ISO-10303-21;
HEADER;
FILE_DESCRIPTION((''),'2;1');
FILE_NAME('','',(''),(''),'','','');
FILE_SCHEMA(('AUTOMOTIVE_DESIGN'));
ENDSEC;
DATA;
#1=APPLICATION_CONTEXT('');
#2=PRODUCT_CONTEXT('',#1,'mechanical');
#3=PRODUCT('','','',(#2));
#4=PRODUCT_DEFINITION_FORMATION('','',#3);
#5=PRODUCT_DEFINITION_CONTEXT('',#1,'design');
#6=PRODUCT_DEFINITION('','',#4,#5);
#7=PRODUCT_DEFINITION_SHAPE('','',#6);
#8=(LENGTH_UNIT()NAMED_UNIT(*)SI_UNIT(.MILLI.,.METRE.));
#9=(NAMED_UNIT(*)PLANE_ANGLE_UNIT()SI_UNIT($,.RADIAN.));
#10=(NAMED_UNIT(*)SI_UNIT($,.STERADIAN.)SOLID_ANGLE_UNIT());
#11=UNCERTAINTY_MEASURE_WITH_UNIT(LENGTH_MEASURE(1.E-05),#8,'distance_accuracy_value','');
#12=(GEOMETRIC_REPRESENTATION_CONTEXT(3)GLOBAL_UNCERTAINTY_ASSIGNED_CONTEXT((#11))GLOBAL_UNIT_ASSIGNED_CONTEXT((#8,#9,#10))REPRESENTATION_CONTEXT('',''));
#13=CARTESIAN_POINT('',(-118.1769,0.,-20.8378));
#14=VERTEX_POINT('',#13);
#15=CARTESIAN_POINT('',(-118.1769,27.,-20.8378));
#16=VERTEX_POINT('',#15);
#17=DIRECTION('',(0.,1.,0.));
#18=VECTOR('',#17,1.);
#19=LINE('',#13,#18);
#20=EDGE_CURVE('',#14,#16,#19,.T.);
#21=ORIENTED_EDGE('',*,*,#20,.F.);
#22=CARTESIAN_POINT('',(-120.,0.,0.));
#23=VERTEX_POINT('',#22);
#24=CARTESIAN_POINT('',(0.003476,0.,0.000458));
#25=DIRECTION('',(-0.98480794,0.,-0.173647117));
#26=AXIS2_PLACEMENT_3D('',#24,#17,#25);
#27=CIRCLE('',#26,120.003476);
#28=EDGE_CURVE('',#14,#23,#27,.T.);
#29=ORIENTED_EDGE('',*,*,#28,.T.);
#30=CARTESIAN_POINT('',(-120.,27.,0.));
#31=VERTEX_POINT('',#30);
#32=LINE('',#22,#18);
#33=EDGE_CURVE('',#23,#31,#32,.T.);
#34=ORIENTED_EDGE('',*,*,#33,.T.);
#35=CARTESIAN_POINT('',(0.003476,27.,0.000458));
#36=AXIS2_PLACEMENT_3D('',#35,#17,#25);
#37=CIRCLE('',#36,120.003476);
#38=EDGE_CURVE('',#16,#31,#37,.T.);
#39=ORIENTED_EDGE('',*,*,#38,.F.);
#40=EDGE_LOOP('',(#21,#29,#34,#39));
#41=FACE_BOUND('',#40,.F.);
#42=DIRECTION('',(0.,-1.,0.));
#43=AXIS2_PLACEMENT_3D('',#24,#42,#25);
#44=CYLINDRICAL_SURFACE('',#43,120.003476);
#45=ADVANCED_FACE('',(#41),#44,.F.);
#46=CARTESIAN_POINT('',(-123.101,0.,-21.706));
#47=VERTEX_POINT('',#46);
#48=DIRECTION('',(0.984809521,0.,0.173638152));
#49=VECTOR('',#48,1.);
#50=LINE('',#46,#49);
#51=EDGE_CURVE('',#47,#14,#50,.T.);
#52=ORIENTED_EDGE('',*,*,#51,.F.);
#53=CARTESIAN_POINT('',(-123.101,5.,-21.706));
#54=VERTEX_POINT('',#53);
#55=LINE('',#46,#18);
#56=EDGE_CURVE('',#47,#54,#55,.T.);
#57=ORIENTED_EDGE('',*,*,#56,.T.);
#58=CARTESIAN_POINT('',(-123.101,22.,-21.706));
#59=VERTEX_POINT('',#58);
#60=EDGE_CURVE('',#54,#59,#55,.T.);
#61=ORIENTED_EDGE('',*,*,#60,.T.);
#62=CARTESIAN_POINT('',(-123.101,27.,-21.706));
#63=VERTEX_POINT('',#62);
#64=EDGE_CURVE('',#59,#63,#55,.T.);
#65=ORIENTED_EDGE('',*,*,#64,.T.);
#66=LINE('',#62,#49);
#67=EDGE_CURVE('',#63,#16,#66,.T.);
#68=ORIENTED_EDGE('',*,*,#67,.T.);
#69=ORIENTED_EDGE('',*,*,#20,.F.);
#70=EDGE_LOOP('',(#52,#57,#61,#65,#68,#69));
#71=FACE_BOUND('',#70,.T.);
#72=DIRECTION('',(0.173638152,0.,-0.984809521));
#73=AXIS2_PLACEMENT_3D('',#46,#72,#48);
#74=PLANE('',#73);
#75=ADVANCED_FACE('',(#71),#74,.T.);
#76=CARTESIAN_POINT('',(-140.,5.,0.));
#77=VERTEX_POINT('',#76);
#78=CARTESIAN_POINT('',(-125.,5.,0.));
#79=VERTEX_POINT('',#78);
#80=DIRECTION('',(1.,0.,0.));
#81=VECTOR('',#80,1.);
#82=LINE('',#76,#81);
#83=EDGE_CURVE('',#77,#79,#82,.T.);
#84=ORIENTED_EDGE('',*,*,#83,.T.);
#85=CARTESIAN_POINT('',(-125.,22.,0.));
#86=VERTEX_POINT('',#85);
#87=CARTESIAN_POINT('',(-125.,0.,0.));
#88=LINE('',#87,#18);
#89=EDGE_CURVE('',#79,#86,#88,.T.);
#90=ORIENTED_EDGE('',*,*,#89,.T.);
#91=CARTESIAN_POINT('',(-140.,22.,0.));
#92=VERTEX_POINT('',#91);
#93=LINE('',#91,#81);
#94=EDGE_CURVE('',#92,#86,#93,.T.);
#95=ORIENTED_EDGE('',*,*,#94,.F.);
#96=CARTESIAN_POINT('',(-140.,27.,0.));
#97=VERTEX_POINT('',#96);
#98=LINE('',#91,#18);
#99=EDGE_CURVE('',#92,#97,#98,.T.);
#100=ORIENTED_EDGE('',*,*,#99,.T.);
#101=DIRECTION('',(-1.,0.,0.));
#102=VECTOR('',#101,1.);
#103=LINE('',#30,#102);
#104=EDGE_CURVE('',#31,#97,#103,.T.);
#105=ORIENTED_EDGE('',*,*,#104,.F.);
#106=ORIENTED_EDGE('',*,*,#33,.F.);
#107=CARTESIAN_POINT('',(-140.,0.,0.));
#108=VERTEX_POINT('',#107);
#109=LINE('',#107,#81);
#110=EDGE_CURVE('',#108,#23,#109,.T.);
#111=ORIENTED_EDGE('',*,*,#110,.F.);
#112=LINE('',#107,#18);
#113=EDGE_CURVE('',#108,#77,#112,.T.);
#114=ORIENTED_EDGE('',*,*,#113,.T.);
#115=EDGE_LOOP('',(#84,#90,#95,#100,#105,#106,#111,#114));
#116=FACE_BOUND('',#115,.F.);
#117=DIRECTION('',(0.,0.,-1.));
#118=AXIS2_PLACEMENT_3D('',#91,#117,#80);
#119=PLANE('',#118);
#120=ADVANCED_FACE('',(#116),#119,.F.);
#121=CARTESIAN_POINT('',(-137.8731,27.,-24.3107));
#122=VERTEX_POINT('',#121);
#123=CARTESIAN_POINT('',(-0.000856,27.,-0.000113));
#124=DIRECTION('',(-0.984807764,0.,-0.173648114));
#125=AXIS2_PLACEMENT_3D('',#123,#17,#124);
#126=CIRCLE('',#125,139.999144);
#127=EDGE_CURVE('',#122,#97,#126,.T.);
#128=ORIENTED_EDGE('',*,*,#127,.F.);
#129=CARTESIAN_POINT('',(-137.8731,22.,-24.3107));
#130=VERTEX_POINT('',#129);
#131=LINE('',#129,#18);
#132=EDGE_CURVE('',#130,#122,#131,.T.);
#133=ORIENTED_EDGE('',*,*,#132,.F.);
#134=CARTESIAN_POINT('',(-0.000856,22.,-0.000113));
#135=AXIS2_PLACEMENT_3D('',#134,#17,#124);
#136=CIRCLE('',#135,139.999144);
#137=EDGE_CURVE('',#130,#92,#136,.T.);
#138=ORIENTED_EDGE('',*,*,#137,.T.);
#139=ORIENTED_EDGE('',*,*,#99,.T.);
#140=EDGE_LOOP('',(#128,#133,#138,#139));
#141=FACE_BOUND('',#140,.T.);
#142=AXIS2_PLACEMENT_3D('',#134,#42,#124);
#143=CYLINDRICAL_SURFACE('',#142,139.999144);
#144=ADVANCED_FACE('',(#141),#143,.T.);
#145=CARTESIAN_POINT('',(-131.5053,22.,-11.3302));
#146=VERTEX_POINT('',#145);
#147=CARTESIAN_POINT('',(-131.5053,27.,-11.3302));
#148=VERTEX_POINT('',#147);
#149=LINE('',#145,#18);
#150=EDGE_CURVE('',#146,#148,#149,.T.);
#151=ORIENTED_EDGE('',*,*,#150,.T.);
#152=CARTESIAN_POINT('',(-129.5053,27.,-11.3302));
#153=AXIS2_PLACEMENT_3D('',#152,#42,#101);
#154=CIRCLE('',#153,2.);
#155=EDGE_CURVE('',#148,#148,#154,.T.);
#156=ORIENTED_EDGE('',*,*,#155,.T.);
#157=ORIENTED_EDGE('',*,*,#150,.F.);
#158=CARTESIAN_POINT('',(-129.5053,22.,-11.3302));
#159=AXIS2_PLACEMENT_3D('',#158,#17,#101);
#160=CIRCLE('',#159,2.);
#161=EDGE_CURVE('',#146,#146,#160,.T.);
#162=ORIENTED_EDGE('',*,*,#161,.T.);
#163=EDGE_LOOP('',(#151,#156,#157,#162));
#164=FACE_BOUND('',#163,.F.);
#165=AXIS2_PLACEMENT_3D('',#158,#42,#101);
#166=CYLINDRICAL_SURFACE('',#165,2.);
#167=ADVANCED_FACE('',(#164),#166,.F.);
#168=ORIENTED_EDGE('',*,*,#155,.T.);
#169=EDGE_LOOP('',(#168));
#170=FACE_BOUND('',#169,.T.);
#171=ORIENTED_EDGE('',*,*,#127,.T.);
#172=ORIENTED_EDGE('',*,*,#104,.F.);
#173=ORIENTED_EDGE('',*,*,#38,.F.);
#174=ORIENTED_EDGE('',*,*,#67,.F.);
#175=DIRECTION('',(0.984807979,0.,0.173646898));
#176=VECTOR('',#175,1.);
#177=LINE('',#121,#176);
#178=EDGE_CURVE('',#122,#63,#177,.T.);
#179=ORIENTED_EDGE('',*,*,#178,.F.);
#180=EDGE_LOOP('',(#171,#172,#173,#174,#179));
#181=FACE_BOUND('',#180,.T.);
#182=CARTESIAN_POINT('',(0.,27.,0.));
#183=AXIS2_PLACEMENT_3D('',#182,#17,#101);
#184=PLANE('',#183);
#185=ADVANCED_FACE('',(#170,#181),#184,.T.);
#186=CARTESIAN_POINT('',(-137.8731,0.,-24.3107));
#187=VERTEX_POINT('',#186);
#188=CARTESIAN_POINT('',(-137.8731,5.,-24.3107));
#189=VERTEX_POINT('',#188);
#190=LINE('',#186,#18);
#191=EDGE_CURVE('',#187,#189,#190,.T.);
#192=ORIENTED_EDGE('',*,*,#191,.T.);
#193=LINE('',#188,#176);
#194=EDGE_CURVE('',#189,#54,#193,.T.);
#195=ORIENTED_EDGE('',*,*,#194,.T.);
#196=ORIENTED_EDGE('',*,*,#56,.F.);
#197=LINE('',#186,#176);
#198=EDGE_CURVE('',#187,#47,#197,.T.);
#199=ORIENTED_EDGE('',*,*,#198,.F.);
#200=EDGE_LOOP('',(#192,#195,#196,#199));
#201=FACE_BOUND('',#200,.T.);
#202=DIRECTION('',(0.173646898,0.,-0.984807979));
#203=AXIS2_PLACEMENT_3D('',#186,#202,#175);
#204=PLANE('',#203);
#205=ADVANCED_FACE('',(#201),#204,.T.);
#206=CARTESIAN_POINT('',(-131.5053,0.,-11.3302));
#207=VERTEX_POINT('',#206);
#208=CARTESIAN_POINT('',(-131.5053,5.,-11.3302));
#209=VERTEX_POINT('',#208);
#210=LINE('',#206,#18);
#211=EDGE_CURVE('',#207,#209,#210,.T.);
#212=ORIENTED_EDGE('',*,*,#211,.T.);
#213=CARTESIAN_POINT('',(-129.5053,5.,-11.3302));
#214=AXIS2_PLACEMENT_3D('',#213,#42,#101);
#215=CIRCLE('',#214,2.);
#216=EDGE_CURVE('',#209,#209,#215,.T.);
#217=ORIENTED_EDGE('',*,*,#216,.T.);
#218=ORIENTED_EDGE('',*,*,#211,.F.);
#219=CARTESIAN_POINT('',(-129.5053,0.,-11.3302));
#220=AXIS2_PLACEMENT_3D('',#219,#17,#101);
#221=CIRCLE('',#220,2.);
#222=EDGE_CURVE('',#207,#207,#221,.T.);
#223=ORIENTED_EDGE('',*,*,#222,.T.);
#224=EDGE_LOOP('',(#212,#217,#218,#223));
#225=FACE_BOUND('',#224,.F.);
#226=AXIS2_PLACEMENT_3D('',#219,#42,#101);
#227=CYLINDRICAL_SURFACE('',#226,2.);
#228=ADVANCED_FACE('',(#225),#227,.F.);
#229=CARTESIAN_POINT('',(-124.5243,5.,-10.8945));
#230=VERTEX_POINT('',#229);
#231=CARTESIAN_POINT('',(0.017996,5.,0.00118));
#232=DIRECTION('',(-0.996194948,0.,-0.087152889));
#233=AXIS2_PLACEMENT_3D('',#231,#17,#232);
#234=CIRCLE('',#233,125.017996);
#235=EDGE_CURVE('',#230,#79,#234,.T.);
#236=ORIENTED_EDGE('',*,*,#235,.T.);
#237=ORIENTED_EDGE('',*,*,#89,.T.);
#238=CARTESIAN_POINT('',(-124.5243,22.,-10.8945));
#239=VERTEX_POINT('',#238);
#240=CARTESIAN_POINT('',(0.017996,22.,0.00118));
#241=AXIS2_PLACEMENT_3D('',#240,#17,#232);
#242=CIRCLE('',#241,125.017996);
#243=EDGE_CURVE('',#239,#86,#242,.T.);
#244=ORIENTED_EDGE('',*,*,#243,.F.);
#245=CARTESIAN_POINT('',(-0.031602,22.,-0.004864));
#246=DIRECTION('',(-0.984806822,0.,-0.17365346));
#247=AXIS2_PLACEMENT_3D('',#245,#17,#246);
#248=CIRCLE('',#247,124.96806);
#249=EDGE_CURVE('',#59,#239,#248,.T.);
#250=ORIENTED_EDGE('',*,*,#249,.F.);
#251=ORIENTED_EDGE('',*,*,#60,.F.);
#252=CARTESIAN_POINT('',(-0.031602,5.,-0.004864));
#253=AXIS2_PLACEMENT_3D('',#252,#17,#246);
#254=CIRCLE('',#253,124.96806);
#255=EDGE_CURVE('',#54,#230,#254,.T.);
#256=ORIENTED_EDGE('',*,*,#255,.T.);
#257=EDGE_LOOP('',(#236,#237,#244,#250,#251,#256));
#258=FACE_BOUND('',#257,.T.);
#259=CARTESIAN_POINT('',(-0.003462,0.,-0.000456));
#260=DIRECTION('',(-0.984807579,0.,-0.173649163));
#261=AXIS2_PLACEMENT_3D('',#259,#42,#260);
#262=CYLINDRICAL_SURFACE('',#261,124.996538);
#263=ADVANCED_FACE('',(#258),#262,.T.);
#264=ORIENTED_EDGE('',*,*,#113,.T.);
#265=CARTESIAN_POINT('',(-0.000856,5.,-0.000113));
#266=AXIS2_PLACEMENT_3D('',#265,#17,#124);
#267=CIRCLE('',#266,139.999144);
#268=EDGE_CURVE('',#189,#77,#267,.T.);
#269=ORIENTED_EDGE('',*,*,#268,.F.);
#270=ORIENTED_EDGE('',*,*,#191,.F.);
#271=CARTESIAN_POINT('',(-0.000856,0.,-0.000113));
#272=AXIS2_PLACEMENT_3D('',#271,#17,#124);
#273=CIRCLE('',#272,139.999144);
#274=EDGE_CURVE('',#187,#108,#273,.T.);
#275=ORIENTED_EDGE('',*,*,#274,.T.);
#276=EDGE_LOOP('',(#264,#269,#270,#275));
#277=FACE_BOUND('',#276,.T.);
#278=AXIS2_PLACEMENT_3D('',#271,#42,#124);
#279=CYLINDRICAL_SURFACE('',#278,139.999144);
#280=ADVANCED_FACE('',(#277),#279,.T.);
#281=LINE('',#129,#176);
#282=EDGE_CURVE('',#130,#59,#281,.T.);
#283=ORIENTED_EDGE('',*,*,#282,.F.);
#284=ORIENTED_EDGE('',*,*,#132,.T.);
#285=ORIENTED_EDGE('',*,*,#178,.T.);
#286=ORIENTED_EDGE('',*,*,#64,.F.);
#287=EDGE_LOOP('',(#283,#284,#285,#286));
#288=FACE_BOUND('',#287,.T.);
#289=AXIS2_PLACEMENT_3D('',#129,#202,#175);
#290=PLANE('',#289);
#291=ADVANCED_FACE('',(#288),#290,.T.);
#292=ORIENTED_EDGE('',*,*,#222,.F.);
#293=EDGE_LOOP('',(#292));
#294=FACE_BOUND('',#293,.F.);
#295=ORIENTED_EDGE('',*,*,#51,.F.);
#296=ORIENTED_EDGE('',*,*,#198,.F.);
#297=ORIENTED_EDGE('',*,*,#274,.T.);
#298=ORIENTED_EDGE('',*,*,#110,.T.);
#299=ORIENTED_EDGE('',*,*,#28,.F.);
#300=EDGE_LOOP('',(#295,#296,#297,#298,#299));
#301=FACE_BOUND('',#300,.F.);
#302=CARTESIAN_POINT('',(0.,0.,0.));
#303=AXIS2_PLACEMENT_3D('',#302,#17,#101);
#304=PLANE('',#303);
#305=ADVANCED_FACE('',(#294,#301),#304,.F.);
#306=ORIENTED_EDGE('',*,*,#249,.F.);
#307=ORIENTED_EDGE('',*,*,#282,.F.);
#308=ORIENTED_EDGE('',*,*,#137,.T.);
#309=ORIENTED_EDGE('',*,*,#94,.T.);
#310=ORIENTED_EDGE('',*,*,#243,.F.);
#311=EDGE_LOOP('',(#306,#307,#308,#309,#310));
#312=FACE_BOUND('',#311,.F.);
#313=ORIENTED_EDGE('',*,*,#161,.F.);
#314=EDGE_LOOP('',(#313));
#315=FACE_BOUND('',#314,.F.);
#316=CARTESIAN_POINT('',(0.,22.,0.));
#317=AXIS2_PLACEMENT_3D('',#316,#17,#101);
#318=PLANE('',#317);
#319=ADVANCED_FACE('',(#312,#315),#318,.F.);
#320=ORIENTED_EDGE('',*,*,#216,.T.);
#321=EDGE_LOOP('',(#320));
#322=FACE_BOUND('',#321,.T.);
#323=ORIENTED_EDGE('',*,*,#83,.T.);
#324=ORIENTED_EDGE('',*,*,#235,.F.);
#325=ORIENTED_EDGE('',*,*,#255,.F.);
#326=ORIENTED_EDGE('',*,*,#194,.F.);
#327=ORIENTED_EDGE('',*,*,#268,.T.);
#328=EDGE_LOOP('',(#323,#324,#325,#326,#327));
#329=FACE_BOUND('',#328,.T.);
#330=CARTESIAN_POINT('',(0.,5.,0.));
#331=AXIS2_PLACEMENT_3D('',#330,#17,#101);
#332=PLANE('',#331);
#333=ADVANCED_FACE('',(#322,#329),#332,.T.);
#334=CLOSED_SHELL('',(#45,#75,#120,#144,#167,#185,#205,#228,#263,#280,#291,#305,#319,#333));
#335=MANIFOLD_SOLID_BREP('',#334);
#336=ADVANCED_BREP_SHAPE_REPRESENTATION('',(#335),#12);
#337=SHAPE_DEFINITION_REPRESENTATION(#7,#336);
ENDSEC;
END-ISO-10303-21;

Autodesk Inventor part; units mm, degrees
ref_plane "YZ Plane" through (0, 0, 0) normal (1, 0, 0) x (0, 1, 0)
ref_plane "XZ Plane" through (0, 0, 0) normal (0, 1, 0) x (-1, 0, 0)
ref_plane "XY Plane" through (0, 0, 0) normal (0, 0, 1) x (1, 0, 0)
sketch "Sketch1" plane through (0, 0, 0) normal (0, 1, 0) x (-1, 0, 0)
  line L0 (0, 0) -> (125, 0) construction
  line L1 (0, 0) -> (125, 0) construction
  line L2 (0, 0) -> (123.101, -21.706) construction
  line L3 (0, 0) -> (300, 0) construction
  line L4 (0, 0) -> (300, 0) construction
  line L5 (140, 0) -> (125, 0)
  line L6 (137.8731, -24.3107) -> (123.101, -21.706)
  line L7 (124.5243, -10.8945) -> (129.5053, -11.3302)
  circle A0 centre (129.5053, -11.3302) radius 2
  arc A1 (137.8731, -24.3107) -> (140, 0) centre (0, 0) ccw
  arc A2 (123.101, -21.706) -> (124.5243, -10.8945) centre (0, 0) ccw
  arc A3 (124.5243, -10.8945) -> (125, 0) centre (0, 0) ccw
  dimension "d1" = 0
  dimension "d2" = 10
  dimension "d4" = 0
  dimension "d7" = 5
  dimension "d8" = 5
  dimension "d9" = 4
  dimension "d28" = 140
  dimension "d29" = 125
  dimension "d31" = 14.7721
extrude "Extrusion1" add sketch "Sketch1" along normal blind 5
sketch "Sketch3" plane through (0, 5, 0) normal (0, 1, 0) x (1, 0, 0)
  arc A0 (-123.101, 21.706) -> (-125, 0) centre (0, 0) ccw projected
  arc A1 (-123.101, 21.706) -> (-125, 0) centre (0, 0) ccw
  arc A2 (-118.1769, 20.8378) -> (-120, 0) centre (0, 0) ccw
  line L0 (0, 0) -> (-118.1769, 20.8378) construction
  line L1 (0, 0) -> (-120, 0) construction
  line L2 (-123.101, 21.706) -> (-118.1769, 20.8378)
  line L3 (-125, 0) -> (-120, 0)
  dimension "d33" = 120
  dimension "d34" = 10
extrude "Extrusion4" add sketch "Sketch3" along normal blind 27 from surface at -5
pattern_linear "Rectangular Pattern3" count 2 spacing 22 along (0, 1, 0) of "Extrusion1"
properties part number "Inner_mount"
